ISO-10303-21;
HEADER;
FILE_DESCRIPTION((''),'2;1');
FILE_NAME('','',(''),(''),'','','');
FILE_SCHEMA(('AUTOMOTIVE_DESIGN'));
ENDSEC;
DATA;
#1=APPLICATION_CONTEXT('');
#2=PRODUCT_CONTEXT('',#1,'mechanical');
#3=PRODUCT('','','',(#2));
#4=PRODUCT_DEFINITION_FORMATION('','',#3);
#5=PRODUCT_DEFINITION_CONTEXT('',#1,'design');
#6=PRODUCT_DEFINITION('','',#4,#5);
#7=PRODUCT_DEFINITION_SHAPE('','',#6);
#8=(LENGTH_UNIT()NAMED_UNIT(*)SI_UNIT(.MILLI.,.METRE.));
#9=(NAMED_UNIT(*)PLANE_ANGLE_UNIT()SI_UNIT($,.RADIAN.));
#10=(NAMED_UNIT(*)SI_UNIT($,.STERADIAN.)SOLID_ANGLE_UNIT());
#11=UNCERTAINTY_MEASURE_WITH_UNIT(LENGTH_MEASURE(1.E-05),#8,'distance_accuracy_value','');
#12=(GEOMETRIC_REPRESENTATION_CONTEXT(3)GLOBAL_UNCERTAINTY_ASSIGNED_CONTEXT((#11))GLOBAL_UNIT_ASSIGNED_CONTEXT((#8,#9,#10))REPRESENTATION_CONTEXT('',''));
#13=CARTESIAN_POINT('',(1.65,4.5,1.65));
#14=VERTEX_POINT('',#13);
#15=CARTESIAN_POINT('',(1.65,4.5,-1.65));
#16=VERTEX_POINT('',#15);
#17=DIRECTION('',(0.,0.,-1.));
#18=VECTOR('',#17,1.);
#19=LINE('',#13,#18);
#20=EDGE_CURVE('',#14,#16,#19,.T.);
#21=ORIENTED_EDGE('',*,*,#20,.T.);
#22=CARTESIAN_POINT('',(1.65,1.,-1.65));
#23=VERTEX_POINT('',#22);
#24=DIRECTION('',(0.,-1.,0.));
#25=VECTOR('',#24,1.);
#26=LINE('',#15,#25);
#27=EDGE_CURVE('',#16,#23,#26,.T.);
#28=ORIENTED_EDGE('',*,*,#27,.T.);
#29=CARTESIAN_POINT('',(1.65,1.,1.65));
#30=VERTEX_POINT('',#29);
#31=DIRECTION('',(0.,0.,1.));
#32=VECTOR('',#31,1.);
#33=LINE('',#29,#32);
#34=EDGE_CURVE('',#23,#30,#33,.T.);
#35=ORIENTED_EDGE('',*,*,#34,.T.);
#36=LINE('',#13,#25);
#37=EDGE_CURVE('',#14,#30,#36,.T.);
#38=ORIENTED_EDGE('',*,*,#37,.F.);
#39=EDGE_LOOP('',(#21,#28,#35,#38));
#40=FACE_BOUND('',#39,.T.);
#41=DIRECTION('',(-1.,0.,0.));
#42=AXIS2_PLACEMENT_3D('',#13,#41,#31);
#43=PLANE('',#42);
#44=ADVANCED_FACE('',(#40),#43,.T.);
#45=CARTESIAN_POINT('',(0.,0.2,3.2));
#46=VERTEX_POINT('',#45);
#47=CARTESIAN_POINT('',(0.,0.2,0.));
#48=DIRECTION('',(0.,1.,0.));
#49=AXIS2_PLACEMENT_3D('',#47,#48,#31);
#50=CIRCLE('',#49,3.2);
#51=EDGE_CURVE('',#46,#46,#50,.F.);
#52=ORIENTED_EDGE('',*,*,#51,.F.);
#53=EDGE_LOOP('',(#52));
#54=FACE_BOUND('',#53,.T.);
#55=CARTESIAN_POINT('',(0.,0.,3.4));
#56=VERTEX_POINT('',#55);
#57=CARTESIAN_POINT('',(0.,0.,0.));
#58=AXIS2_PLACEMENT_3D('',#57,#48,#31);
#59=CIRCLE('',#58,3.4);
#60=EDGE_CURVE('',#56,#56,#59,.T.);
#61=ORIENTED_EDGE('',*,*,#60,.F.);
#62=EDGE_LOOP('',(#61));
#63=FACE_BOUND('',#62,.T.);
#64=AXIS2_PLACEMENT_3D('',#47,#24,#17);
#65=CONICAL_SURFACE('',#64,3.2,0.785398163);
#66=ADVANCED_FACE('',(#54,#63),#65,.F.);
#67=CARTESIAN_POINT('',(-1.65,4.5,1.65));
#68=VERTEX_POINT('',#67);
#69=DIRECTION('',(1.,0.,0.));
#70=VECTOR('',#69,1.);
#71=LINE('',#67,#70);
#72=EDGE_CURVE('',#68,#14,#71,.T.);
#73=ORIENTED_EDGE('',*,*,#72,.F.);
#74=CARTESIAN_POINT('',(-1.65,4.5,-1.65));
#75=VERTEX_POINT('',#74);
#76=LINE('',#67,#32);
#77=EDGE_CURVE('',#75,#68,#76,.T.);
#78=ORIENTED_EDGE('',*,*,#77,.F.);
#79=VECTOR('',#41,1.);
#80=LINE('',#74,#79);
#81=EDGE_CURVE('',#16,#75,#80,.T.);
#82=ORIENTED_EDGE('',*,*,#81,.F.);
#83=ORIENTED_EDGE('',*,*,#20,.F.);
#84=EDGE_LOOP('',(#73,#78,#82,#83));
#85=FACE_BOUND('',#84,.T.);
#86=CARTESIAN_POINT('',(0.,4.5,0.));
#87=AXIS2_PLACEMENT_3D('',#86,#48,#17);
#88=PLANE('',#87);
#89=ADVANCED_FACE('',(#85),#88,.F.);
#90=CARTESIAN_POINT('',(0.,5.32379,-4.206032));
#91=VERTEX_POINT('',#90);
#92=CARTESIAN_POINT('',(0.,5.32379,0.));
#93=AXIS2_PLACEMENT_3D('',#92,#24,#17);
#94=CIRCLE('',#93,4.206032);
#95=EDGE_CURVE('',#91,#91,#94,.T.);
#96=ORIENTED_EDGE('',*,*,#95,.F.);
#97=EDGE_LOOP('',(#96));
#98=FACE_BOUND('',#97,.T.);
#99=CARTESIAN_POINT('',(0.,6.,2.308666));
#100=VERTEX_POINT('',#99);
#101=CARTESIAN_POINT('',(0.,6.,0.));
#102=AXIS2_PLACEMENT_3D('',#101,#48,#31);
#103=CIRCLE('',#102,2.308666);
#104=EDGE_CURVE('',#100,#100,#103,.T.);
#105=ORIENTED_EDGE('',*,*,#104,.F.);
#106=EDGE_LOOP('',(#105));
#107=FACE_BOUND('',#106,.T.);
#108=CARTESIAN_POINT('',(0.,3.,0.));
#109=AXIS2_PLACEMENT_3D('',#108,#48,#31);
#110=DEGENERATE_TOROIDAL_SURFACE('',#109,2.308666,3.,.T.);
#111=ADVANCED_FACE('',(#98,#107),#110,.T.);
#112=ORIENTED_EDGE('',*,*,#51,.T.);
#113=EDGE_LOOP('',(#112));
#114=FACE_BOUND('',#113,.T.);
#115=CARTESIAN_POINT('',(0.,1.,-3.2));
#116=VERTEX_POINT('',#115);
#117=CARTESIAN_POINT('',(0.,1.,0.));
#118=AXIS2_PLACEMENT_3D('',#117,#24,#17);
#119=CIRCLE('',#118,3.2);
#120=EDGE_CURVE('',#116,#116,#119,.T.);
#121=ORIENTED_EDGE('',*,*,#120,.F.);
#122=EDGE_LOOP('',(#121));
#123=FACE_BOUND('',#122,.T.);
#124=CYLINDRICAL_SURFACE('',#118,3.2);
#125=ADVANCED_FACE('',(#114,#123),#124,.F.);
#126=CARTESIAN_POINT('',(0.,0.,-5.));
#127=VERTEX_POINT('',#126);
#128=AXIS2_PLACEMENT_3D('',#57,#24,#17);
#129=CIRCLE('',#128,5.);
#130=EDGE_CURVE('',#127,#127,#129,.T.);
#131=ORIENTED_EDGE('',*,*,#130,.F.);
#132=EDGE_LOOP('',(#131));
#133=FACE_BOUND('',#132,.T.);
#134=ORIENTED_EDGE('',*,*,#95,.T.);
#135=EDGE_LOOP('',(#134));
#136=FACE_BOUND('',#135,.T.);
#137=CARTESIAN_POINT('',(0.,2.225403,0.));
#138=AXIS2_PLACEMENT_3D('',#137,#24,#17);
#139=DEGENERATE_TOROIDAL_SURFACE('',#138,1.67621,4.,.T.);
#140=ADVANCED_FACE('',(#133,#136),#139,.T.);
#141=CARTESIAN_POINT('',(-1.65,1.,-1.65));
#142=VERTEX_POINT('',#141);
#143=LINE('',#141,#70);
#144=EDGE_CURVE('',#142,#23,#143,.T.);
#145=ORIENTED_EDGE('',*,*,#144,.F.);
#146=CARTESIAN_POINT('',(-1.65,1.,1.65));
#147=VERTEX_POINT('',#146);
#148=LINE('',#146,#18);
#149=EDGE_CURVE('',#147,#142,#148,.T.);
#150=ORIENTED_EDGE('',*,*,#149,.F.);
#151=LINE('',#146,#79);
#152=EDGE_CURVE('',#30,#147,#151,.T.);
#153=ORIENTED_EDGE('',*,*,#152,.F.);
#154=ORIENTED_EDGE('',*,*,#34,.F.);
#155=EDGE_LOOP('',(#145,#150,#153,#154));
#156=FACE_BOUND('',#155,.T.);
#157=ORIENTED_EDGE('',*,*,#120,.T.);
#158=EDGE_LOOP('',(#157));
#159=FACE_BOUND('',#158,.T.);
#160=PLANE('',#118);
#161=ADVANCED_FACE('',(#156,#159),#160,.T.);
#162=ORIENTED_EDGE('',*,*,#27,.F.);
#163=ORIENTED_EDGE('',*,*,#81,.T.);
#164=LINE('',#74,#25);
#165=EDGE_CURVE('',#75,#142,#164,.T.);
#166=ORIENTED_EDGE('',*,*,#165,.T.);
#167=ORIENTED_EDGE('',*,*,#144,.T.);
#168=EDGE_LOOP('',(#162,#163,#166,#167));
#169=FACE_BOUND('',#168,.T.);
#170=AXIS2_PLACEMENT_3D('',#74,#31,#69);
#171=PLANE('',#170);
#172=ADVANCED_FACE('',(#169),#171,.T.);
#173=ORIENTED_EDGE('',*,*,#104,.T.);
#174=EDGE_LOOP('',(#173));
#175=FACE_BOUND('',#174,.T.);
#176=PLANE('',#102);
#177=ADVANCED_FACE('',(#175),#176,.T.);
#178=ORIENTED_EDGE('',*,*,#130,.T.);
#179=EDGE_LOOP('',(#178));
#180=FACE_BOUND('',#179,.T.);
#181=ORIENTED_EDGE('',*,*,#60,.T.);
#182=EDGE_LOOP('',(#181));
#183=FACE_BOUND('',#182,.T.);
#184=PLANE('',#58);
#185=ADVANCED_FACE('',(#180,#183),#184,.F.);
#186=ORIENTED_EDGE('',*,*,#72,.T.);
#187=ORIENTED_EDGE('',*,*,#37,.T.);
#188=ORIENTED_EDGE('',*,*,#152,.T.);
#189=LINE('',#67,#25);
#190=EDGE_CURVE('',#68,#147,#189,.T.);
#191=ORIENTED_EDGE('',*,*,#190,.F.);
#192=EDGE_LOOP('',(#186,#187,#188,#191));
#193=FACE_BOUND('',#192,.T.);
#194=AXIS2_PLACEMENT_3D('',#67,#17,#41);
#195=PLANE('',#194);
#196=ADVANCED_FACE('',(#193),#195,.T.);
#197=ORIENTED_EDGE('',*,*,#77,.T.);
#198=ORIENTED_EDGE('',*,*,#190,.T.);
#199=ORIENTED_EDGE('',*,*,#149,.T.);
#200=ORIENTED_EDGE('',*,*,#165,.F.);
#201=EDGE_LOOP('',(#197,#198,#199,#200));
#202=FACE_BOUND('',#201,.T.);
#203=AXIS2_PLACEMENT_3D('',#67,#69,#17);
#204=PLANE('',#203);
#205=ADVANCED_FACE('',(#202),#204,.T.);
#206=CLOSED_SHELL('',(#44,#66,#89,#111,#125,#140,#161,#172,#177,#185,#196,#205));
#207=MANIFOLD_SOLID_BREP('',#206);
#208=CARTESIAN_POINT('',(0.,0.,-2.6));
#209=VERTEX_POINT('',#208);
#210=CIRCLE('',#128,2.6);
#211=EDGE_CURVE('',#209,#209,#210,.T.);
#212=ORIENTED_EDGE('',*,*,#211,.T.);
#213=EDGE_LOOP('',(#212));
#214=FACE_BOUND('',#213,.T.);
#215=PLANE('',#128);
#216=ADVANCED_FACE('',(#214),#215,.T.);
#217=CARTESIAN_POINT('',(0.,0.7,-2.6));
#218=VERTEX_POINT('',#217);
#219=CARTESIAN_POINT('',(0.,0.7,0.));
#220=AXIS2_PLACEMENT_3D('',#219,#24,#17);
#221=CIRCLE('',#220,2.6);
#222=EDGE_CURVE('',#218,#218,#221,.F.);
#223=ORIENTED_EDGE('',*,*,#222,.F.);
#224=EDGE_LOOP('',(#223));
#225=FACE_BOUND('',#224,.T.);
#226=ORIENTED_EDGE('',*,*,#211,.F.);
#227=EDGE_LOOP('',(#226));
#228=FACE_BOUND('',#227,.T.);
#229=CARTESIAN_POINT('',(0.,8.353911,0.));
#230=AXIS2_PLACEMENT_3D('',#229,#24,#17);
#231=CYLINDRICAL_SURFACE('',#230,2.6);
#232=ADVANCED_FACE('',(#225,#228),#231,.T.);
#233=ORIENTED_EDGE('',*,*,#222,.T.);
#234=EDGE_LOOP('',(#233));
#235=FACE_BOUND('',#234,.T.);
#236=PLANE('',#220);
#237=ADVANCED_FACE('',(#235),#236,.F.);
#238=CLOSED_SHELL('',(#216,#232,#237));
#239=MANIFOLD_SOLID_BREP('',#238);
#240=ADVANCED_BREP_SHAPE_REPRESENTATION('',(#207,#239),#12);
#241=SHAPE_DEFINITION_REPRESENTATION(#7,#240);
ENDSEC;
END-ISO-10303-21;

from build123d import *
from build123d.topology import SkipClean

# Parameters (mm, degrees)
SKETCH3_R           = 11
BOSS_EXTRUDE3_DEPTH = 6
BOSS_EXTRUDE3_TAPER = 40
FILLET1_R           = 3
FILLET2_R           = 0.4
SKETCH4_W           = 3.3
SKETCH4_H           = 3.3
CUT_EXTRUDE1_DEPTH  = 4.5
CUT_EXTRUDE2_DEPTH  = 17.07096292
CHAMFER3_SIZE       = 0.2
SKETCH7_R           = 3.2
CUT_EXTRUDE3_DEPTH  = 1
CHAMFER4_SIZE       = 0.2
SKETCH9_R           = 2.6
BOSS_EXTRUDE4_DEPTH = 0.7
FILLET3_R           = 3


# Read off the part's stored shape, not the designer's step: Mirror1
with BuildPart() as part:
    # Sketch3 → Boss-Extrude3 (new body)
    with BuildSketch(Plane(origin=(0, 0, 0), x_dir=(1, 0, 0), z_dir=(0, 1, 0))):
        Circle(SKETCH3_R)
    extrude(amount=BOSS_EXTRUDE3_DEPTH, taper=BOSS_EXTRUDE3_TAPER)

    # Fillet1
    fillet1_edges = [part.edges().sort_by_distance(p)[0] for p in [
        (-5.965402213, 6, 0),
    ]]
    fillet(fillet1_edges, radius=FILLET1_R)

    # Fillet2
    fillet2_edges = [part.edges().sort_by_distance(p)[0] for p in [
        (-11, 0, 0),
    ]]
    fillet(fillet2_edges, radius=FILLET2_R)

    # Sketch4 → Cut-Extrude1 (cut)
    with BuildSketch(Plane.XZ):
        Rectangle(SKETCH4_W, SKETCH4_H)
    extrude(amount=-CUT_EXTRUDE1_DEPTH, mode=Mode.SUBTRACT)

    # Sketch5 → Cut-Extrude2 (cut, through all)
    with BuildSketch(Plane.XZ):
        with BuildLine():
            Line((-13.652715989, 0), (13.652715989, 0))
            ThreePointArc((13.652715989, 0), (0, -15.684261885), (-13.652715989, 0))
        make_face()
    extrude(amount=-CUT_EXTRUDE2_DEPTH, mode=Mode.SUBTRACT)

    # Sketch6 → Cut-Revolve1 (revolve, cut)
    with BuildSketch(Plane(origin=(0, 0, 0), x_dir=(-1, 0, 0), z_dir=(0, 0, -1))):
        with BuildLine():
            Line((-9.420154834, 1.882786153), (-9.16303979, 2.18920393))
            ThreePointArc((-9.16303979, 2.18920393), (-8.275217918, 2.488558757), (-8.134579614, 3.414875039))
            Line((-8.134579614, 3.414875039), (-7.87746457, 3.721292816))
            ThreePointArc((-7.87746457, 3.721292816), (-6.989642699, 4.020647643), (-6.849004395, 4.946963925))
            Line((-6.849004395, 4.946963925), (-6.591889351, 5.253381703))
            ThreePointArc((-6.591889351, 5.253381703), (-5.70406748, 5.552736529), (-5.563429175, 6.479052812))
            Line((-5.563429175, 6.479052812), (-5.306314132, 6.785470589))
            ThreePointArc((-5.306314132, 6.785470589), (-4.41849226, 7.084825416), (-4.277853956, 8.011141698))
            ThreePointArc((-4.277853956, 8.011141698), (-10.583292115, 7.036077543), (-10.448615009, 0.657115044))
            ThreePointArc((-10.448615009, 0.657115044), (-9.560793138, 0.956469871), (-9.420154834, 1.882786153))
        make_face()
    revolve(axis=Axis((0, 0, 0), (0, 1, 0)), mode=Mode.SUBTRACT)

    # Mirror1: part across plane


with BuildPart() as part_1:
    with SkipClean():  # the faces are left unmerged after this step: merging them gives an invalid solid
        add(part.part)
        add(part.part.mirror(Plane(origin=(-13.652715989, 6, 0), x_dir=(1, 0, 0), z_dir=(0, 0, 1))))

    # Chamfer3
    chamfer3_edges = [part_1.edges().sort_by_distance(p)[0] for p in [
        (1.65, 0, 0.825),
        (0, 0, -1.65),
        (-1.65, 0, 0.825),
        (0, 0, 1.65),
    ]]
    chamfer(chamfer3_edges, length=CHAMFER3_SIZE)

    # Sketch7 → Cut-Extrude3 (cut)
    with SkipClean():  # the faces are left unmerged after this step: merging them gives an invalid solid
        with BuildSketch(Plane.XZ):
            with Locations(Location((0, 0, 0), (0, 0, 270))):
                Circle(SKETCH7_R)
        extrude(amount=-CUT_EXTRUDE3_DEPTH, mode=Mode.SUBTRACT)

    # Chamfer4
    chamfer4_edges = [part_1.edges().sort_by_distance(p)[0] for p in [
        (-2.2627417, 0, -2.2627417),
    ]]
    chamfer(chamfer4_edges, length=CHAMFER4_SIZE)

    # Sketch11 → Cut-Revolve2 (revolve, cut)
    with BuildSketch(Plane(origin=(0, 0, 0), x_dir=(0, 0, -1), z_dir=(1, 0, 0)), mode=Mode.PRIVATE) as cut_revolve2_sk:
        with BuildLine():
            ThreePointArc((5, 0), (5.470943184, 3.490314395), (3, 6))
            ThreePointArc((3, 6), (18.910038102, 7.970012701), (5, 0))
        make_face()
    revolve(cut_revolve2_sk.sketch.rotate(Axis((0, 0, 0), (0, 1, 0)), 180), axis=Axis((0, 0, 0), (0, 1, 0)), mode=Mode.SUBTRACT)

    # Fillet3
    fillet3_edges = [part_1.edges().sort_by_distance(p)[0] for p in [
        (0, 6, -3),
    ]]
    fillet(fillet3_edges, radius=FILLET3_R)


with BuildPart() as body_2:
    # Sketch9 → Boss-Extrude4 (new body)
    with BuildSketch(Plane.XZ):
        with Locations(Location((0, 0, 0), (0, 0, 270))):
            Circle(SKETCH9_R)
    extrude(amount=-BOSS_EXTRUDE4_DEPTH)


solid = Compound([part_1.part, body_2.part])
